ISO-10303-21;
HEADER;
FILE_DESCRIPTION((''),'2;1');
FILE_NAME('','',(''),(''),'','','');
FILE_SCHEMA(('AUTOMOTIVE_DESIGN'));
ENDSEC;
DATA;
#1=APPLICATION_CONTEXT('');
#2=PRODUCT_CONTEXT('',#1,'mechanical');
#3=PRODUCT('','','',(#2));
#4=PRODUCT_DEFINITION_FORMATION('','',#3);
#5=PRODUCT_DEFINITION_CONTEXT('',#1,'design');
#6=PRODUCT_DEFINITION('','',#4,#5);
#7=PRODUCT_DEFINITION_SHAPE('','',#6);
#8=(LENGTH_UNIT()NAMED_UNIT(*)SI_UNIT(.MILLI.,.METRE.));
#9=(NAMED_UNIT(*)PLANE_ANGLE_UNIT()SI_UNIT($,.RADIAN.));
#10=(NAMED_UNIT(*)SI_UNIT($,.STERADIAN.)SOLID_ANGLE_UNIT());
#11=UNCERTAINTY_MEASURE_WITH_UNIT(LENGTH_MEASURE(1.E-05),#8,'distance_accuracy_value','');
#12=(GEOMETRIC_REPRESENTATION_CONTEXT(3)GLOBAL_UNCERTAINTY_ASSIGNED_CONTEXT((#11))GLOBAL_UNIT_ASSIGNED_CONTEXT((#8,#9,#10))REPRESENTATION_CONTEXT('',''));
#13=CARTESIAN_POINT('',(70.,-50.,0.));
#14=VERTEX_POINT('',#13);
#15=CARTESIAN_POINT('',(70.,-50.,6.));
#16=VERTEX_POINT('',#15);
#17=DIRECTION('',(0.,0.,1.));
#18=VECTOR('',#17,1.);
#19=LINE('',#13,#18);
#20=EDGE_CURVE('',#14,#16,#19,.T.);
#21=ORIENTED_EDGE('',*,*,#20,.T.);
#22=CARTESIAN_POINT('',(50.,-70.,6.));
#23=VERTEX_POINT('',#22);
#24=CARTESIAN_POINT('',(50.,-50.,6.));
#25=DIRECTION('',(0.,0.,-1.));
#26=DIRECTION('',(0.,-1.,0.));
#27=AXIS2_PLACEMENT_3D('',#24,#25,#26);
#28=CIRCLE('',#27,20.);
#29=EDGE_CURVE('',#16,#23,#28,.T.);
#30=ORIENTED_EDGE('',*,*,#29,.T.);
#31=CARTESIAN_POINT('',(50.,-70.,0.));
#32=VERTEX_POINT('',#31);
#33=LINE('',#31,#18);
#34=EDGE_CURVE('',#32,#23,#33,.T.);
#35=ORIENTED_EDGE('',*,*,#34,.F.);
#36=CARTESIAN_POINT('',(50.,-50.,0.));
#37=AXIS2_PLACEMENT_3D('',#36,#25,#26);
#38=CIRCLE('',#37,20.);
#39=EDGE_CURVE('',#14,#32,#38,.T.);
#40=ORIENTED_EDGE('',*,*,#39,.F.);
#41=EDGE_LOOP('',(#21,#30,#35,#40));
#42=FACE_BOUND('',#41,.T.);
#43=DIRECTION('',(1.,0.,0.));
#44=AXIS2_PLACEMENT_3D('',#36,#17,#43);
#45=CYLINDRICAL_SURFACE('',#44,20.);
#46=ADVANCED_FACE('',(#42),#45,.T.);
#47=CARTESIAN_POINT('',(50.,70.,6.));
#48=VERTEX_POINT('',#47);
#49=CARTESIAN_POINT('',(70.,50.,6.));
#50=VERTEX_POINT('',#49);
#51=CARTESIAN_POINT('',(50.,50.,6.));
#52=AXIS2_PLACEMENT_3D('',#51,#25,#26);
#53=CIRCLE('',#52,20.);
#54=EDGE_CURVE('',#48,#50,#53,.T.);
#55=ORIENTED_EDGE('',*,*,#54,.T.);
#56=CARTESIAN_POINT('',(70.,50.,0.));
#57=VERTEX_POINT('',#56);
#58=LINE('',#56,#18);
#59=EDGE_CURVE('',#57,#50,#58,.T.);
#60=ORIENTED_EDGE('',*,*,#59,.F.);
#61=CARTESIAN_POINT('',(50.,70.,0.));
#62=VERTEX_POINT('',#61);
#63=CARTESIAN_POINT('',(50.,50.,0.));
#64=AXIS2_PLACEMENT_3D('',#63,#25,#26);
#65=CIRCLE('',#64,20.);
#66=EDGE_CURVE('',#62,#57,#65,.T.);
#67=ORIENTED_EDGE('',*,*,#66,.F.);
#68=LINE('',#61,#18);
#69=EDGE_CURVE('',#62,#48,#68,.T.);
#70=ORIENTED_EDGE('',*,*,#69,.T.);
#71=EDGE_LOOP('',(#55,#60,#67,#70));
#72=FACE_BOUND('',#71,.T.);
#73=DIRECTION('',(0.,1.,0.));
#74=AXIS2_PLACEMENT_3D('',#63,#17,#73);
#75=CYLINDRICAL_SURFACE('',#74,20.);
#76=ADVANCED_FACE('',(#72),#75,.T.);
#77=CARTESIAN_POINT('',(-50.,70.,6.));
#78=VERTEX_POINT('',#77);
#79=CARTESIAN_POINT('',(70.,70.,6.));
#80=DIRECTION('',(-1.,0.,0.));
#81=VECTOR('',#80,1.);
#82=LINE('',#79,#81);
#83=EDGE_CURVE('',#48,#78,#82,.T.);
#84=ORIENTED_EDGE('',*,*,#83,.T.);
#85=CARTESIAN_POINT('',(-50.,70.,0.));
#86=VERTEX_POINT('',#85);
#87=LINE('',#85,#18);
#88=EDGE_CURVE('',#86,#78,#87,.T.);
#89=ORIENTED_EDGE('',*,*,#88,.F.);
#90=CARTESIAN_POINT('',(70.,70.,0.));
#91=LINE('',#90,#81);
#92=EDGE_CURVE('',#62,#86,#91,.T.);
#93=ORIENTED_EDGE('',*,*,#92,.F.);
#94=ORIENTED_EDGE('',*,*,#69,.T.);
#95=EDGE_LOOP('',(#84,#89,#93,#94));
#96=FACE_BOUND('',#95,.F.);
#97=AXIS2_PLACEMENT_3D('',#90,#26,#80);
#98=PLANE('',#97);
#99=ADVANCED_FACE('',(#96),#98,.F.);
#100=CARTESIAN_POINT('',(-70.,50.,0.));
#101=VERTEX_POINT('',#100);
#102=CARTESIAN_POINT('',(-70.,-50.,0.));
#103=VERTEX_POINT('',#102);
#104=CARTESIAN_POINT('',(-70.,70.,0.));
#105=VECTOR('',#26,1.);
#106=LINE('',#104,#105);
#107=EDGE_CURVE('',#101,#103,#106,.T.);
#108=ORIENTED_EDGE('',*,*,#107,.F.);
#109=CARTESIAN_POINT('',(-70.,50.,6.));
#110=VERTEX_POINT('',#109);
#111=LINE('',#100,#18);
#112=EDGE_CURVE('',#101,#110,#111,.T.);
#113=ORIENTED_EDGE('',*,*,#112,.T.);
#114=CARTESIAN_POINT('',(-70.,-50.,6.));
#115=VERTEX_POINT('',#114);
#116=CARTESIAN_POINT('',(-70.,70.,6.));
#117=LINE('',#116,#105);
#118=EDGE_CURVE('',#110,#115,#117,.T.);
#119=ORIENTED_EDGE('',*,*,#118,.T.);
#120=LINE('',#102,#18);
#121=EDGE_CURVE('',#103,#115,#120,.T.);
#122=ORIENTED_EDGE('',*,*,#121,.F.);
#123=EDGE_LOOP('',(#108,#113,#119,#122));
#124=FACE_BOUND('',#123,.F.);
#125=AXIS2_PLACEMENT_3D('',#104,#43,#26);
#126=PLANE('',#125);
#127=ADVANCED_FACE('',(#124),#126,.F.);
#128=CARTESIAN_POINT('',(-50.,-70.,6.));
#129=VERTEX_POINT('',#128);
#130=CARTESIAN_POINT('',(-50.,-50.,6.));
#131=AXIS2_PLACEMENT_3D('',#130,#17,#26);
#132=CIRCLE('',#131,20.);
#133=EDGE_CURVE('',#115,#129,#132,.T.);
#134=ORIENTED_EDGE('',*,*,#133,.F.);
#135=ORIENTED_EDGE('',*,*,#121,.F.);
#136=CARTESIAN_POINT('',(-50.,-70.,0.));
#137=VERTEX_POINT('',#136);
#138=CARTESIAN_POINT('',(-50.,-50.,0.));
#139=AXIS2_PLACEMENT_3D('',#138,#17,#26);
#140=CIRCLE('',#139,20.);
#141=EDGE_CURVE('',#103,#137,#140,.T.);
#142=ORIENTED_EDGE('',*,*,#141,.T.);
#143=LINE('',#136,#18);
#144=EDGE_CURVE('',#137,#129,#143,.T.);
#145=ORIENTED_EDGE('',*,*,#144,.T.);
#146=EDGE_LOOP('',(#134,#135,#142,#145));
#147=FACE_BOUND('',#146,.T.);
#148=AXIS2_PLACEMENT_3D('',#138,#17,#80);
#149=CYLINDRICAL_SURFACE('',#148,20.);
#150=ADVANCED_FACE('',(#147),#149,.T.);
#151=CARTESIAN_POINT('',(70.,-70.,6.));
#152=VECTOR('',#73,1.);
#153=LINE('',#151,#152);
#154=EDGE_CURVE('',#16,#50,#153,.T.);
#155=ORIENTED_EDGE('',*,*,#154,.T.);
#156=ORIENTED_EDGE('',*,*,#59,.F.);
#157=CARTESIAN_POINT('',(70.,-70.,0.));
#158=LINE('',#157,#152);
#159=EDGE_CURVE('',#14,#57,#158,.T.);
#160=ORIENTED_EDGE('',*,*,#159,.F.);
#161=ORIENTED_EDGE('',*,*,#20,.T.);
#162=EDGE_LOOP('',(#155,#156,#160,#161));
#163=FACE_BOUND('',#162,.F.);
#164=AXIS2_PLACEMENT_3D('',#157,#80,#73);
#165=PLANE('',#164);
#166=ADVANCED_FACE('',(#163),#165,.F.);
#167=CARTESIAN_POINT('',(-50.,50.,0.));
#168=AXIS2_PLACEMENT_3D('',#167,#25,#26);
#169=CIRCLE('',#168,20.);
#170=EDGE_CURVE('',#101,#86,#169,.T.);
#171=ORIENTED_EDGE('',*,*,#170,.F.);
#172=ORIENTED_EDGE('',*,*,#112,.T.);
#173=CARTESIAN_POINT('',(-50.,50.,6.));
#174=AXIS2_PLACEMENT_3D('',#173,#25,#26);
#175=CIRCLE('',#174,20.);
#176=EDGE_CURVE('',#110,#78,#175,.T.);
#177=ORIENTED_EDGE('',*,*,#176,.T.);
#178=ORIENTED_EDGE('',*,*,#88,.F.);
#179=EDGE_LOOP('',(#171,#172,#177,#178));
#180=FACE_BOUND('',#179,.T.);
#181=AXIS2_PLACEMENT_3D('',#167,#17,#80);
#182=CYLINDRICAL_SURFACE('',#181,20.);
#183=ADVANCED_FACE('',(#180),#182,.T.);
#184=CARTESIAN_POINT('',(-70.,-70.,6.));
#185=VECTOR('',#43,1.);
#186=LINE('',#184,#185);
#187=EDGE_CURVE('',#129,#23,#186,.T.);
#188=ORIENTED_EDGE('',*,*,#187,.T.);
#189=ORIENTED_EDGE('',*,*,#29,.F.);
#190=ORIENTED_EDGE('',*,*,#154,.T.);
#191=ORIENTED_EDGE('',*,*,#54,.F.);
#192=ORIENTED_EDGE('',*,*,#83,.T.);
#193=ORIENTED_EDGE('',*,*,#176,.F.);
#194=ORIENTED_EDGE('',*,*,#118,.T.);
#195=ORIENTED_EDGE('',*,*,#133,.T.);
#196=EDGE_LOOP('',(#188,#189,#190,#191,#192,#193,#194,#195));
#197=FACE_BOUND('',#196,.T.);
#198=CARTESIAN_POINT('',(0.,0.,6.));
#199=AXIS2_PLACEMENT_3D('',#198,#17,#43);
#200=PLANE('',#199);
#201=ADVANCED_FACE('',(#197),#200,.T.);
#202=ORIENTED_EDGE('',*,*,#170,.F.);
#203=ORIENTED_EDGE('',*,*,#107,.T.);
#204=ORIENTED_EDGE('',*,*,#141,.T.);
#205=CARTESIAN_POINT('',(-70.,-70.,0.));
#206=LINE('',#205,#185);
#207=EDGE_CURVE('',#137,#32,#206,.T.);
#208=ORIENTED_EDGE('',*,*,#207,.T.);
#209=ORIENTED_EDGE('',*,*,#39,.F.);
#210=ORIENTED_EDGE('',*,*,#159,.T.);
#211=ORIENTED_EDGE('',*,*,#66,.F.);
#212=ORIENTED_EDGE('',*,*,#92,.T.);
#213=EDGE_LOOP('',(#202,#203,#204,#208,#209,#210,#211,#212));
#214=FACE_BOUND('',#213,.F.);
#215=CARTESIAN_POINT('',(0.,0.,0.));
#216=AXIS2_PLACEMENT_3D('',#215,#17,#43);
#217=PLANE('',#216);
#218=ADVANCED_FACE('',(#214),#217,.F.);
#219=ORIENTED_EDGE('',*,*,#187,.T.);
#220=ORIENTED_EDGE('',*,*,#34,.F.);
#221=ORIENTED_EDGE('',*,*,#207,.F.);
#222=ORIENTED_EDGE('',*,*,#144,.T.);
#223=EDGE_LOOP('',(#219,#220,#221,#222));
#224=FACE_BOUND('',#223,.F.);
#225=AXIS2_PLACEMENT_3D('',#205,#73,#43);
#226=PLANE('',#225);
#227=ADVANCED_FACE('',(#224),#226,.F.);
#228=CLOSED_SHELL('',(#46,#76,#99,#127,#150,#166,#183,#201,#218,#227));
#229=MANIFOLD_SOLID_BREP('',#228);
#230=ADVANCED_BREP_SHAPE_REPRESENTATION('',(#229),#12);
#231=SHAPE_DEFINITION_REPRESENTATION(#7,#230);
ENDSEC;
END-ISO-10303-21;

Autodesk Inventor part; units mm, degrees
ref_plane "YZ Plane" through (0, 0, 0) normal (1, 0, 0) x (0, 1, 0)
ref_plane "XZ Plane" through (0, 0, 0) normal (0, 1, 0) x (-1, 0, 0)
ref_plane "XY Plane" through (0, 0, 0) normal (0, 0, 1) x (1, 0, 0)
sketch "Sketch1" plane through (0, 0, 0) normal (0, 0, 1) x (1, 0, 0)
  line L0 (-70, -70) -> (70, -70)
  line L1 (70, -70) -> (70, 70)
  line L2 (70, 70) -> (-70, 70)
  line L3 (-70, 70) -> (-70, -70)
  line L4 (-70, -70) -> (70, 70) construction
  line L5 (70, -70) -> (-70, 70) construction
  point P0 (0, 0)
  dimension "d0" = 140
  dimension "d1" = 140
extrude "Plate1" add sketch "Sketch1" along normal blind 6
fillet "Corner Round1" radius 20 4 edges at (70, -70, 3) (-70, -70, 3) (-70, 70, 3) (70, 70, 3)
sketch "Sketch5" plane through (0, 0, 6) normal (0, 0, 1) x (1, 0, 0)
  line L0 (70, 50) -> (70, -50) projected
  line L1 (70, 40) -> (-70, 40)
  line L2 (-70, -50) -> (-70, 50) projected
  line L3 (-50, 70) -> (50, 70) projected
  point P0 (0, 0)
  dimension "d23" = 30
feature "Fold1" [suppressed]
equation "\"d0\" = d1"
equation "\"d2\" = Thickness"
equation "\"d24\" = BendReliefWidth"
equation "\"d25\" = BendReliefDepth"
equation "\"d26\" = MinimumRemnant"
equation "\"d27\" = TransitionRadius"
equation "\"d29\" = BendRadius"
equation "\"BendReliefWidth\" = Thickness"
equation "\"BendReliefDepth\" = 0.5 * Thickness"
equation "\"CornerReliefSize\" = 4 * Thickness"
equation "\"MinimumRemnant\" = 2 * Thickness"
equation "\"TransitionRadius\" = BendRadius"
equation "\"JacobiRadiusSize\" = BendRadius"
equation "\"GapSize\" = Thickness"
equation "\"Thickness\" = 6"
equation "\"BendRadius\" = 5"
properties part number "PRS 9694 leg plate for filter_1200" material "Stainless Steel"
